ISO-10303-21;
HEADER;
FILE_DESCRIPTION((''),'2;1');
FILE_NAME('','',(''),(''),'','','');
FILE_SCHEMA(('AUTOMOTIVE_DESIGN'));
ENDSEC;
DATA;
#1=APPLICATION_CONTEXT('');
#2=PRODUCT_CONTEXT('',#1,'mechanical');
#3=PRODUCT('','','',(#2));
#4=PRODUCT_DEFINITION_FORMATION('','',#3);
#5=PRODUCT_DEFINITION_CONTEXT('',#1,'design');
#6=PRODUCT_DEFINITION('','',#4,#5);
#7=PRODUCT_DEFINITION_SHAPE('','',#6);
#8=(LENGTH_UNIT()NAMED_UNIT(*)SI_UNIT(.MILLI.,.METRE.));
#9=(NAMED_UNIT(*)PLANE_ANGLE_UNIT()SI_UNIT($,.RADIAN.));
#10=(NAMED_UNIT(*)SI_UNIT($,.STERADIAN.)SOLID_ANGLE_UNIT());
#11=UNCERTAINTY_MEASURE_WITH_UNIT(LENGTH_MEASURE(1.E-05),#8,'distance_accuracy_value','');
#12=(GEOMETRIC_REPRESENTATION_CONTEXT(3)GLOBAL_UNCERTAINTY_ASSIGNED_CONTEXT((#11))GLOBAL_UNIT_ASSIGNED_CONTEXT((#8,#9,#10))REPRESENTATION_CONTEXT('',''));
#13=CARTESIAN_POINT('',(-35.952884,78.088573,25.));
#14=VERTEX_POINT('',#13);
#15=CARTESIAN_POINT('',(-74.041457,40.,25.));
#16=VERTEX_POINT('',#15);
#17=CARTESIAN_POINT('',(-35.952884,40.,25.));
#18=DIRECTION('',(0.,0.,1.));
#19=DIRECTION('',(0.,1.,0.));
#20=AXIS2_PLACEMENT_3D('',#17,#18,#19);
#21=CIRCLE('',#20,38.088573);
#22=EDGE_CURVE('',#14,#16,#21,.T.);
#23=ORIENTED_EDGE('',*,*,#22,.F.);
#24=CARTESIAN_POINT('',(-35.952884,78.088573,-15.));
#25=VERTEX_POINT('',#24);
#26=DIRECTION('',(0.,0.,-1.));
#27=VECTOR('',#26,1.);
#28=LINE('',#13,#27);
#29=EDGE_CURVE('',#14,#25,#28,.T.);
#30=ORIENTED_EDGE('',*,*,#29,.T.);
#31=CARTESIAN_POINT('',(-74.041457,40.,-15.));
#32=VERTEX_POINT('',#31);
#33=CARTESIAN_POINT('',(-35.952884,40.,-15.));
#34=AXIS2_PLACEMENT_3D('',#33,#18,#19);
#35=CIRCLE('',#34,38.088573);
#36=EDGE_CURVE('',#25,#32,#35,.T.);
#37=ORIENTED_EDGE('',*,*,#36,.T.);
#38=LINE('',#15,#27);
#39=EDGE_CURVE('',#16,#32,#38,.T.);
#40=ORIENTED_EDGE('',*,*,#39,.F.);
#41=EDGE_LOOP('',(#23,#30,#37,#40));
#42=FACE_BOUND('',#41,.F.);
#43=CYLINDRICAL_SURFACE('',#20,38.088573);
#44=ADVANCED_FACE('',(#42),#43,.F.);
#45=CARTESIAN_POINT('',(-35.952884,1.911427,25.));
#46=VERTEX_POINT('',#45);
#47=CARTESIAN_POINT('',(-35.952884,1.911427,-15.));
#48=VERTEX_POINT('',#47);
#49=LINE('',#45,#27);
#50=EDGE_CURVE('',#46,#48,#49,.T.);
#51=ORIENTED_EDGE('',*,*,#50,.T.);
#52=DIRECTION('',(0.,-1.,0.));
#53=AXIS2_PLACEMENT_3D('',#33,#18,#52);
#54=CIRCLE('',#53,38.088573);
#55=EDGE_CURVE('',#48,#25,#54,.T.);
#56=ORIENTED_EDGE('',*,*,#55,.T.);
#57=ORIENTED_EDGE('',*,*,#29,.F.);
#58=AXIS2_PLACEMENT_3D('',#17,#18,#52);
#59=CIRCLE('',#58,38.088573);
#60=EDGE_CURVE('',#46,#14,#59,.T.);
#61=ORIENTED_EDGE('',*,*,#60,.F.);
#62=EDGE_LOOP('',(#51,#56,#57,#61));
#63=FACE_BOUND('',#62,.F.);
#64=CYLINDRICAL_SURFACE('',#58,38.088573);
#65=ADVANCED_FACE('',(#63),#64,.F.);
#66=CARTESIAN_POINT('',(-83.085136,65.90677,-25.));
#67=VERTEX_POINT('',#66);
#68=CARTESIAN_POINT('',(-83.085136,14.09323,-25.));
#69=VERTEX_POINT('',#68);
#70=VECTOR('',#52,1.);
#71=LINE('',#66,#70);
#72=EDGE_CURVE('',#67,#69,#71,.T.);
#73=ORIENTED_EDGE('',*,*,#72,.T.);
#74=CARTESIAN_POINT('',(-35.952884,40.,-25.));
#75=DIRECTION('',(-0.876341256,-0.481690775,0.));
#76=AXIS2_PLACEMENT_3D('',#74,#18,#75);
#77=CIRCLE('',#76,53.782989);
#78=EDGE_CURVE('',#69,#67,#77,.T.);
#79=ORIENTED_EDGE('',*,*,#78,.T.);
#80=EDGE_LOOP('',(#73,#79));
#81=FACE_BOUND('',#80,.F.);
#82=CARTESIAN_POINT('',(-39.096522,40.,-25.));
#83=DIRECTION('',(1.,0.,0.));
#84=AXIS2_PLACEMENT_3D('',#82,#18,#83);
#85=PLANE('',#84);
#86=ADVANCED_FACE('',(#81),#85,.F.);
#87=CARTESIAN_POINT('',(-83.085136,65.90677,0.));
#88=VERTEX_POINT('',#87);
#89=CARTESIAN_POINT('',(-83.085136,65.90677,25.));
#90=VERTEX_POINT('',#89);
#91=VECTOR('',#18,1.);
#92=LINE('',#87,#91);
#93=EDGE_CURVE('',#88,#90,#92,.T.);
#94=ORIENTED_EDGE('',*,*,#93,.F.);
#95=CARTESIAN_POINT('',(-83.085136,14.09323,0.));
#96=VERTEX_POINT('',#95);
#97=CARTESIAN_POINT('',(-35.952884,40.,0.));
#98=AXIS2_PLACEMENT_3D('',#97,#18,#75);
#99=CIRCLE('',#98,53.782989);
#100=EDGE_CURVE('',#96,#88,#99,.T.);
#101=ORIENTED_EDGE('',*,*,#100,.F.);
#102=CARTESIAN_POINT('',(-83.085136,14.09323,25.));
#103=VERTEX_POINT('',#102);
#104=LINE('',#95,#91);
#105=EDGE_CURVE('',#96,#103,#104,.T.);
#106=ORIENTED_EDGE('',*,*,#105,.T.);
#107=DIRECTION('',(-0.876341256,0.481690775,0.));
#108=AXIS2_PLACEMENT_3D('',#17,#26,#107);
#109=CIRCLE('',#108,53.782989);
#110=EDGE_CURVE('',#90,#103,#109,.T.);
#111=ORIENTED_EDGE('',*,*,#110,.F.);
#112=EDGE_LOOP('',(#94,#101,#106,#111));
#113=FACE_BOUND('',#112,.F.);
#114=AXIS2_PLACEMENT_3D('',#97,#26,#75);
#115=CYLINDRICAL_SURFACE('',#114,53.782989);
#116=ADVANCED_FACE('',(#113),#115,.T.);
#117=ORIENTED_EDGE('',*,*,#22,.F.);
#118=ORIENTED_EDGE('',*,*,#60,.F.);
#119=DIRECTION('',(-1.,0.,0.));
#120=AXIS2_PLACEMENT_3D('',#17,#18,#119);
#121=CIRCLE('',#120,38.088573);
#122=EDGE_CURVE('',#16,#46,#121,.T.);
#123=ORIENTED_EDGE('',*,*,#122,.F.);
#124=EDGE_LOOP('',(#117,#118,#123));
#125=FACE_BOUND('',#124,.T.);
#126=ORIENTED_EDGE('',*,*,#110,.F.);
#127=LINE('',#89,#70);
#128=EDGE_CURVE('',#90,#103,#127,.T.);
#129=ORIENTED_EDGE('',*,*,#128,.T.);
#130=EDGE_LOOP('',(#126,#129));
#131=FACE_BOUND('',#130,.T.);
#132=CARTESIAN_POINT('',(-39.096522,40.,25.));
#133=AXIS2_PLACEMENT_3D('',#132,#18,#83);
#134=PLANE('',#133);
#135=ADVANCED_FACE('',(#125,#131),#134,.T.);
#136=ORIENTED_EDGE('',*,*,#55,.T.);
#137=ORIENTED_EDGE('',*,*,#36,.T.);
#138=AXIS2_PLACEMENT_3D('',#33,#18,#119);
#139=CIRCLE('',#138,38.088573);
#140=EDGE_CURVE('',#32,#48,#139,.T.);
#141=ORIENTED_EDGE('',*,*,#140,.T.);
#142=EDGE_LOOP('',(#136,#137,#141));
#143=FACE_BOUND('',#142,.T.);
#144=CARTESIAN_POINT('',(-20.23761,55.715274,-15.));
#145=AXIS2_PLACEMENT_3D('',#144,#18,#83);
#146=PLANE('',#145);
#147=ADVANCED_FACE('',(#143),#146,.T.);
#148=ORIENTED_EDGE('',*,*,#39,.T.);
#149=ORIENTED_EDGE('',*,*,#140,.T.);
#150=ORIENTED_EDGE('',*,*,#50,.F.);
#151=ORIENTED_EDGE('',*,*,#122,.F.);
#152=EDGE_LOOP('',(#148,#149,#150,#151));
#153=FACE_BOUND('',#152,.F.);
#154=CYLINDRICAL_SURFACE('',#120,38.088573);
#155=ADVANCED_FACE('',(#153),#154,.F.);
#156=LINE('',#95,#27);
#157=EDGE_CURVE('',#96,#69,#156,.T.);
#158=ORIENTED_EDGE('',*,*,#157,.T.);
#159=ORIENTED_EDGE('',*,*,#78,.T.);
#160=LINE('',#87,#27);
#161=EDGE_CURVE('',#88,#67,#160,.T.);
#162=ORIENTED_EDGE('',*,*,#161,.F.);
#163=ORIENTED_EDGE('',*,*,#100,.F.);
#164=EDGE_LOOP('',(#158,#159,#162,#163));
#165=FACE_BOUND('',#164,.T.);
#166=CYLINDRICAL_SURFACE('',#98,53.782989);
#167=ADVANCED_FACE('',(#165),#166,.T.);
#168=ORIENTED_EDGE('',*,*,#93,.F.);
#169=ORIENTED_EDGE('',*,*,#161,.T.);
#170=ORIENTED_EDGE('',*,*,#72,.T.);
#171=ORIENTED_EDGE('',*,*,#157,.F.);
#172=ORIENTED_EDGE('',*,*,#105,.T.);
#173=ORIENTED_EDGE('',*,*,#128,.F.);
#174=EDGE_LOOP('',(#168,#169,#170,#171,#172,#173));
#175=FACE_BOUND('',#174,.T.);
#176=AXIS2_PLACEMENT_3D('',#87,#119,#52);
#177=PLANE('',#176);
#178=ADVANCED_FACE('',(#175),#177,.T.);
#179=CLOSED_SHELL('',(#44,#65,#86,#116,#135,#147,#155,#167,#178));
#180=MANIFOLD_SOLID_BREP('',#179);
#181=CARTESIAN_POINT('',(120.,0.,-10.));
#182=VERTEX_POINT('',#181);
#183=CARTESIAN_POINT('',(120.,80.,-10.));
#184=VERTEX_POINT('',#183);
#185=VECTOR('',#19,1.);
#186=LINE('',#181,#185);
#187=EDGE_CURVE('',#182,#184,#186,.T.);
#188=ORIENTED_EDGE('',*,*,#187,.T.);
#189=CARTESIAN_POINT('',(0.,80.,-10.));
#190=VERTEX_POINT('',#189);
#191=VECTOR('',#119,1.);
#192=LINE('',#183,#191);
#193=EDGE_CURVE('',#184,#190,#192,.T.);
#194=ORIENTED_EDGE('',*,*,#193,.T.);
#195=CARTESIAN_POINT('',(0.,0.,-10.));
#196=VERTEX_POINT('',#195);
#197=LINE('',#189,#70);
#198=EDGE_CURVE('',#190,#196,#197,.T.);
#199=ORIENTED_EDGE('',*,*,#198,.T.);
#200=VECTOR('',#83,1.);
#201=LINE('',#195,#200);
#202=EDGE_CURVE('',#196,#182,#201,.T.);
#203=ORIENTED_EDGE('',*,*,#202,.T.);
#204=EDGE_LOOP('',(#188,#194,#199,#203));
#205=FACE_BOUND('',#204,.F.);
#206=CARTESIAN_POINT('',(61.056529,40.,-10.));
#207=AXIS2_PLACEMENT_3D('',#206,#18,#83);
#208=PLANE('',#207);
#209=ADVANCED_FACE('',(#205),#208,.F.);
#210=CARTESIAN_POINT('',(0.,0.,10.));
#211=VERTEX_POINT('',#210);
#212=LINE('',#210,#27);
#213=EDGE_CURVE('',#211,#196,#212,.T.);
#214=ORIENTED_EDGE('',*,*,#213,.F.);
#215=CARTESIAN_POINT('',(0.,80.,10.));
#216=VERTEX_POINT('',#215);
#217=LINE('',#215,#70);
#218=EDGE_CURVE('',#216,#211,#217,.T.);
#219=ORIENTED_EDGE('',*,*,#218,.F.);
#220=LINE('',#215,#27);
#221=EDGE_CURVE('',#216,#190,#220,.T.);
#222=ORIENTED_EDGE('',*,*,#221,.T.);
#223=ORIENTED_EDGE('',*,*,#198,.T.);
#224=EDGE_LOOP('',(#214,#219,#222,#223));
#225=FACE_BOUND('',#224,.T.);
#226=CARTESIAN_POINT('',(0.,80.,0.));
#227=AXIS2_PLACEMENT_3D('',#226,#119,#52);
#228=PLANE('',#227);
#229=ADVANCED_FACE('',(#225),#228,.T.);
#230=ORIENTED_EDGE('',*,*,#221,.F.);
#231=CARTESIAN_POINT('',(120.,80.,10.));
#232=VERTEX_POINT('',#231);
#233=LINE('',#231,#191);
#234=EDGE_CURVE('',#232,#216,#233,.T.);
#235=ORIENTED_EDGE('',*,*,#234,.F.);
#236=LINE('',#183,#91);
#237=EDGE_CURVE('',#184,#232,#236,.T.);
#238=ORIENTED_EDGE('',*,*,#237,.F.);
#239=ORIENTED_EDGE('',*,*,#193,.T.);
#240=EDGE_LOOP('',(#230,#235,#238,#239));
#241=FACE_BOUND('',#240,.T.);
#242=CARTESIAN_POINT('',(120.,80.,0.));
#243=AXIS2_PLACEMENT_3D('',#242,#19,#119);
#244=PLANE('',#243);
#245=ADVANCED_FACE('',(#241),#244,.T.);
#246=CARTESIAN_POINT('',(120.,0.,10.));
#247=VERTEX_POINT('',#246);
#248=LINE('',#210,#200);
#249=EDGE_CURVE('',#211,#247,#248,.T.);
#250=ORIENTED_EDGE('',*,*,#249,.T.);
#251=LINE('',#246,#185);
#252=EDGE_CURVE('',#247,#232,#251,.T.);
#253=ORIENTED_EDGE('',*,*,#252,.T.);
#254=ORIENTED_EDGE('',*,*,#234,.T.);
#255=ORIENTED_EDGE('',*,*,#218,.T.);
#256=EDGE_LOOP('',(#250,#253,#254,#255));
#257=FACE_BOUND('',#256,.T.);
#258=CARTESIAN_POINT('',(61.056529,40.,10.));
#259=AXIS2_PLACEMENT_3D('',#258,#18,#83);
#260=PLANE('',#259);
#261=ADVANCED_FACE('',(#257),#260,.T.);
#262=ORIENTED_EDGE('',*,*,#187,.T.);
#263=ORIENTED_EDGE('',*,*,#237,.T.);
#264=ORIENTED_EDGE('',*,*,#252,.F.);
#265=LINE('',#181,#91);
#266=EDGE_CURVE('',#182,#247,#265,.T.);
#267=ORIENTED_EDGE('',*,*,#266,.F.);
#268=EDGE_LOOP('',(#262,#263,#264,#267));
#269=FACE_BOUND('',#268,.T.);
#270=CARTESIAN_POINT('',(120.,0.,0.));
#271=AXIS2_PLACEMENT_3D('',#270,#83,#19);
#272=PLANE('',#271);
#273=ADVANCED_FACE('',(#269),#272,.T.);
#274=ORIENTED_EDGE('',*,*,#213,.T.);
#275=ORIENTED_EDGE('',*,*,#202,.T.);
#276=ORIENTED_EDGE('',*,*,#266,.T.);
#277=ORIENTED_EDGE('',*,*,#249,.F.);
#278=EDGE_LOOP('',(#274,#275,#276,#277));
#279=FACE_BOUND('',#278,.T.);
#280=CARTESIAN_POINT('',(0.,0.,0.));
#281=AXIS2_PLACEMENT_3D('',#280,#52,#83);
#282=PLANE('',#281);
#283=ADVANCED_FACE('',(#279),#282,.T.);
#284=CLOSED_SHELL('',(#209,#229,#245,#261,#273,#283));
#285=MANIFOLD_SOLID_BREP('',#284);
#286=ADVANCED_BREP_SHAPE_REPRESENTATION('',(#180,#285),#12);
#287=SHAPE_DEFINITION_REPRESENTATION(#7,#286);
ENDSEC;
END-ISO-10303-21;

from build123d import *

# Parameters (mm, degrees)
F1_DEPTH      = 25
F1_DEPTH_BACK = 25
F2_DEPTH      = 10
F2_DEPTH_BACK = 10
F4_DEPTH      = 40


with BuildPart() as f1:
    # F0 (on Top) → F1 (new body, two sides)
    with BuildSketch(Plane.XY) as f1_sk:
        with BuildLine():
            ThreePointArc((-83.0851361962, 14.0932304172), (-44.9472909192, -13.0255649041), (0, 0))
            Line((0, 0), (0, 80))
            ThreePointArc((0, 80), (-44.9472909192, 93.0255649041), (-83.0851361962, 65.9067695828))
            Line((-83.0851361962, 65.9067695828), (-83.0851361962, 14.0932304172))
        make_face()
        with BuildLine():
            Line((0, 80), (0, 0))
            ThreePointArc((0, 0), (13.1707529219, 18.1030103156), (17.8301045695, 40))
            ThreePointArc((17.8301045695, 40), (13.1707529219, 61.8969896844), (0, 80))
        make_face()
    extrude(amount=F1_DEPTH)
    extrude(f1_sk.sketch, amount=-F1_DEPTH_BACK)

    # F3 (on face) → F4 (cut)
    with BuildSketch(Plane.XY.offset(25)):
        with BuildLine():
            ThreePointArc((2.1356884389, 40), (-9.0201962122, 66.9326880249), (-35.952884237, 78.0885726759))
            Line((-35.952884237, 78.0885726759), (-35.952884237, 40))
            Line((-35.952884237, 40), (2.1356884389, 40))
        make_face()
        with BuildLine():
            Line((-35.952884237, 40), (-35.952884237, 78.0885726759))
            ThreePointArc((-35.952884237, 78.0885726759), (-62.8855722619, 66.9326880249), (-74.0414569129, 40))
            Line((-74.0414569129, 40), (-35.952884237, 40))
        make_face()
        with BuildLine():
            Line((2.1356884389, 40), (-35.952884237, 40))
            Line((-35.952884237, 40), (-35.952884237, 1.9114273241))
            ThreePointArc((-35.952884237, 1.9114273241), (-9.0201962122, 13.0673119751), (2.1356884389, 40))
        make_face()
        with BuildLine():
            Line((-35.952884237, 1.9114273241), (-35.952884237, 40))
            Line((-35.952884237, 40), (-74.0414569129, 40))
            ThreePointArc((-74.0414569129, 40), (-62.8855722619, 13.0673119751), (-35.952884237, 1.9114273241))
        make_face()
    extrude(amount=-F4_DEPTH, mode=Mode.SUBTRACT)


with BuildPart() as f2:
    # F0 (on Top) → F2 (new body, two sides)
    with BuildSketch(Plane.XY) as f2_sk:
        with BuildLine():
            ThreePointArc((17.8301045695, 40), (13.1707529219, 18.1030103156), (0, 0))
            Line((0, 0), (120, 0))
            Line((120, 0), (120, 80))
            Line((120, 80), (0, 80))
            ThreePointArc((0, 80), (13.1707529219, 61.8969896844), (17.8301045695, 40))
        make_face()
        with BuildLine():
            Line((0, 80), (0, 0))
            ThreePointArc((0, 0), (13.1707529219, 18.1030103156), (17.8301045695, 40))
            ThreePointArc((17.8301045695, 40), (13.1707529219, 61.8969896844), (0, 80))
        make_face()
    extrude(amount=F2_DEPTH)
    extrude(f2_sk.sketch, amount=-F2_DEPTH_BACK)


solid = Compound([f1.part, f2.part])
